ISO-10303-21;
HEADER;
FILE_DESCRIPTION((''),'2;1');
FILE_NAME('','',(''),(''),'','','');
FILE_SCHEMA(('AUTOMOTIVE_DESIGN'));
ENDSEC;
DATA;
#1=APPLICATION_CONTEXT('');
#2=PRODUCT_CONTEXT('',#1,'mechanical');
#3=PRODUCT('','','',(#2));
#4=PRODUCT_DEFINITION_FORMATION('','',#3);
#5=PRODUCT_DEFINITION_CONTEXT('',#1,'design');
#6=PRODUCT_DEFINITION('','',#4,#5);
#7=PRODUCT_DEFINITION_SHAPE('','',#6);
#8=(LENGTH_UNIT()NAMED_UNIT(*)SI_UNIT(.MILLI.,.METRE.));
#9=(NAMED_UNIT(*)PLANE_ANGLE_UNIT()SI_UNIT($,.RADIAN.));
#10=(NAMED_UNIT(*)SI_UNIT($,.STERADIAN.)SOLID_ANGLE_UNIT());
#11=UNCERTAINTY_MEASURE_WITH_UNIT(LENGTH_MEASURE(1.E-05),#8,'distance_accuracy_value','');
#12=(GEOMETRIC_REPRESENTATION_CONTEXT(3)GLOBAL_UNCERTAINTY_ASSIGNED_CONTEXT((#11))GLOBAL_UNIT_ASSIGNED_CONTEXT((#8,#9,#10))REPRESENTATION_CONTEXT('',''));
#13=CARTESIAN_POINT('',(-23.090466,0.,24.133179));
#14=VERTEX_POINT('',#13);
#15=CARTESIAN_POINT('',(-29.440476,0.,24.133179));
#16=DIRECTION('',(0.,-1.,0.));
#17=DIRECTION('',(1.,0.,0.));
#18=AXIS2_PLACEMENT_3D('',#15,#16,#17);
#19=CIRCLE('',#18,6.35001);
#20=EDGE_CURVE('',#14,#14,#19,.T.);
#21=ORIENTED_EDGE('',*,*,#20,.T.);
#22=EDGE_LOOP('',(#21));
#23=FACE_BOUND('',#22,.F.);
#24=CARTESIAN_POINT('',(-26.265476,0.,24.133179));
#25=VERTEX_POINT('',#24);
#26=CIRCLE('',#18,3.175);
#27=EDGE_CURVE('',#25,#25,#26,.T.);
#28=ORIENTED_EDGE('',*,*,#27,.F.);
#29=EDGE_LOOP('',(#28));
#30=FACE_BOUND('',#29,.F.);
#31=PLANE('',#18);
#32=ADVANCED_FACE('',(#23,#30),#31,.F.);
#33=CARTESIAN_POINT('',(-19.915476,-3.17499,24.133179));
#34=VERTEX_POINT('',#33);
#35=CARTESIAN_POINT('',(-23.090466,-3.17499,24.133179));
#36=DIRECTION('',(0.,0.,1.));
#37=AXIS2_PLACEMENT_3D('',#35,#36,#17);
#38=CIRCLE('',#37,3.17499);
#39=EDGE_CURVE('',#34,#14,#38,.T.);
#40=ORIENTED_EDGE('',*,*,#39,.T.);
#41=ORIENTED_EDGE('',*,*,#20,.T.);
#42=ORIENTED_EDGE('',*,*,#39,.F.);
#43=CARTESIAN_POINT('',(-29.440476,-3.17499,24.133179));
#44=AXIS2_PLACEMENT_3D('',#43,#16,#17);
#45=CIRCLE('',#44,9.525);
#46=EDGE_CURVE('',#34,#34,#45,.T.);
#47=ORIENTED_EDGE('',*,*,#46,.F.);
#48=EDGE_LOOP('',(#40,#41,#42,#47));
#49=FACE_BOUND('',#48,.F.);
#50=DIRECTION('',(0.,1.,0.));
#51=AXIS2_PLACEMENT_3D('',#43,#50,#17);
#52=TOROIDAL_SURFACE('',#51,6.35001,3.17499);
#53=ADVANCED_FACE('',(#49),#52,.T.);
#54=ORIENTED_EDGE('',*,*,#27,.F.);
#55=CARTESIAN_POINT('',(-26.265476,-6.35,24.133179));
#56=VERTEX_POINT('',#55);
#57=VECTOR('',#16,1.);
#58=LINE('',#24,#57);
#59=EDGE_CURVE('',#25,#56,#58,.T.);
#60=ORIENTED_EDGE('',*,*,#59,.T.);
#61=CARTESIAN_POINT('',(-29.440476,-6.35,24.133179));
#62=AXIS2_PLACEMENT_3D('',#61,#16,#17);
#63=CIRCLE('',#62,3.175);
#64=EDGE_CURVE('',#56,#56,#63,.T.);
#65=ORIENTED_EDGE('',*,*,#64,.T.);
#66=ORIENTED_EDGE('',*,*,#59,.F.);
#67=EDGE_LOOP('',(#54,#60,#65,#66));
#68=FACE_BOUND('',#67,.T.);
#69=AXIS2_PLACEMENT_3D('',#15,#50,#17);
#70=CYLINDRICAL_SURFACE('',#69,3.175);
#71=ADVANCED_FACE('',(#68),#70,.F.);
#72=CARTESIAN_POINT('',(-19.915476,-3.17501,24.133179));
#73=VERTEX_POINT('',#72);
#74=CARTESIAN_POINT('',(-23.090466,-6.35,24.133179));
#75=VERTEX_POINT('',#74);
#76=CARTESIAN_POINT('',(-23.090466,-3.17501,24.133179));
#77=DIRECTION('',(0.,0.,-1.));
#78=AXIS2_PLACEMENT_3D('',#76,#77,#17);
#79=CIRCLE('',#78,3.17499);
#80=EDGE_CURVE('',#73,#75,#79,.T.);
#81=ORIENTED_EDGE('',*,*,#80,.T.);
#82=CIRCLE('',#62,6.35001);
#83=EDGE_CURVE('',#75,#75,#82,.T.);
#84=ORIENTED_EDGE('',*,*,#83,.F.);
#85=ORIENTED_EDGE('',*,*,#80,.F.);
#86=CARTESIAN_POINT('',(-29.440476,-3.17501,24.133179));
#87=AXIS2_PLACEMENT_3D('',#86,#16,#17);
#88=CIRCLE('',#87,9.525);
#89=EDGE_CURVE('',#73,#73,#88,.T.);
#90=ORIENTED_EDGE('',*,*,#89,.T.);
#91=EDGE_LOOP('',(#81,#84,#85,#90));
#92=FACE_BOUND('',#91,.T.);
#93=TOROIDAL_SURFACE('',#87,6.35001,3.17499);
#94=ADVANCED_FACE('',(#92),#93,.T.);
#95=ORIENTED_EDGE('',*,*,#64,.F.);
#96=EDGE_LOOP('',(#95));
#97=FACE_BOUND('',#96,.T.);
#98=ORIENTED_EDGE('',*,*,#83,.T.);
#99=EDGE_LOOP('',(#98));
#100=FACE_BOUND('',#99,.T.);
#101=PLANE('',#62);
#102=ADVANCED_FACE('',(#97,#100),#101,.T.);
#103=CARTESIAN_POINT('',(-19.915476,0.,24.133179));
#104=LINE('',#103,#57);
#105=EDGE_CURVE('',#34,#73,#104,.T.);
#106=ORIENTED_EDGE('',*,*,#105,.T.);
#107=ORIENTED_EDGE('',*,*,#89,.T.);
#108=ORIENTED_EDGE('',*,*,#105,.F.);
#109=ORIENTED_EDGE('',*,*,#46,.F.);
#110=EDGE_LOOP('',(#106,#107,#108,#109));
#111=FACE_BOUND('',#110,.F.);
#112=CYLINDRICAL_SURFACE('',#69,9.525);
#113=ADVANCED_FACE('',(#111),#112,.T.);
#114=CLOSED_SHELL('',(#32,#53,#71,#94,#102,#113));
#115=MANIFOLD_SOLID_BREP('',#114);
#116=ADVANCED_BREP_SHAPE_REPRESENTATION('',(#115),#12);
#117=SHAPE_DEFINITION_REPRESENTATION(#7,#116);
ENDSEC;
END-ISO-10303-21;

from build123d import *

# Parameters (mm, degrees)
F0_R     = 9.525
F0_R_2   = 3.175
F1_DEPTH = 6.35
F2_R     = 3.17499


# Not quite as in the source:
# - a fillet or chamfer is up to 0.001 mm smaller than in the source, because OpenCascade refuses the exact size


with BuildPart() as f1:
    # F0 (on Front) → F1 (new body)
    with BuildSketch(Plane.XZ):
        with Locations((-29.4404756278, 24.1331793368)):
            Circle(F0_R)
        with Locations((-29.4404756278, 24.1331793368)):
            Circle(F0_R_2, mode=Mode.SUBTRACT)
    extrude(amount=F1_DEPTH)

    # F2 (radius 3.175 in the source; OpenCascade refuses exactly that, so slightly less here)
    f2_edges = [f1.edges().sort_by_distance(p)[0] for p in [
        (-19.915476, -3.175, 24.133179),
        (-38.965476, 0, 24.133179),
        (-38.965476, -6.35, 24.133179),
    ]]
    fillet(f2_edges, radius=F2_R)


solid = f1.part
